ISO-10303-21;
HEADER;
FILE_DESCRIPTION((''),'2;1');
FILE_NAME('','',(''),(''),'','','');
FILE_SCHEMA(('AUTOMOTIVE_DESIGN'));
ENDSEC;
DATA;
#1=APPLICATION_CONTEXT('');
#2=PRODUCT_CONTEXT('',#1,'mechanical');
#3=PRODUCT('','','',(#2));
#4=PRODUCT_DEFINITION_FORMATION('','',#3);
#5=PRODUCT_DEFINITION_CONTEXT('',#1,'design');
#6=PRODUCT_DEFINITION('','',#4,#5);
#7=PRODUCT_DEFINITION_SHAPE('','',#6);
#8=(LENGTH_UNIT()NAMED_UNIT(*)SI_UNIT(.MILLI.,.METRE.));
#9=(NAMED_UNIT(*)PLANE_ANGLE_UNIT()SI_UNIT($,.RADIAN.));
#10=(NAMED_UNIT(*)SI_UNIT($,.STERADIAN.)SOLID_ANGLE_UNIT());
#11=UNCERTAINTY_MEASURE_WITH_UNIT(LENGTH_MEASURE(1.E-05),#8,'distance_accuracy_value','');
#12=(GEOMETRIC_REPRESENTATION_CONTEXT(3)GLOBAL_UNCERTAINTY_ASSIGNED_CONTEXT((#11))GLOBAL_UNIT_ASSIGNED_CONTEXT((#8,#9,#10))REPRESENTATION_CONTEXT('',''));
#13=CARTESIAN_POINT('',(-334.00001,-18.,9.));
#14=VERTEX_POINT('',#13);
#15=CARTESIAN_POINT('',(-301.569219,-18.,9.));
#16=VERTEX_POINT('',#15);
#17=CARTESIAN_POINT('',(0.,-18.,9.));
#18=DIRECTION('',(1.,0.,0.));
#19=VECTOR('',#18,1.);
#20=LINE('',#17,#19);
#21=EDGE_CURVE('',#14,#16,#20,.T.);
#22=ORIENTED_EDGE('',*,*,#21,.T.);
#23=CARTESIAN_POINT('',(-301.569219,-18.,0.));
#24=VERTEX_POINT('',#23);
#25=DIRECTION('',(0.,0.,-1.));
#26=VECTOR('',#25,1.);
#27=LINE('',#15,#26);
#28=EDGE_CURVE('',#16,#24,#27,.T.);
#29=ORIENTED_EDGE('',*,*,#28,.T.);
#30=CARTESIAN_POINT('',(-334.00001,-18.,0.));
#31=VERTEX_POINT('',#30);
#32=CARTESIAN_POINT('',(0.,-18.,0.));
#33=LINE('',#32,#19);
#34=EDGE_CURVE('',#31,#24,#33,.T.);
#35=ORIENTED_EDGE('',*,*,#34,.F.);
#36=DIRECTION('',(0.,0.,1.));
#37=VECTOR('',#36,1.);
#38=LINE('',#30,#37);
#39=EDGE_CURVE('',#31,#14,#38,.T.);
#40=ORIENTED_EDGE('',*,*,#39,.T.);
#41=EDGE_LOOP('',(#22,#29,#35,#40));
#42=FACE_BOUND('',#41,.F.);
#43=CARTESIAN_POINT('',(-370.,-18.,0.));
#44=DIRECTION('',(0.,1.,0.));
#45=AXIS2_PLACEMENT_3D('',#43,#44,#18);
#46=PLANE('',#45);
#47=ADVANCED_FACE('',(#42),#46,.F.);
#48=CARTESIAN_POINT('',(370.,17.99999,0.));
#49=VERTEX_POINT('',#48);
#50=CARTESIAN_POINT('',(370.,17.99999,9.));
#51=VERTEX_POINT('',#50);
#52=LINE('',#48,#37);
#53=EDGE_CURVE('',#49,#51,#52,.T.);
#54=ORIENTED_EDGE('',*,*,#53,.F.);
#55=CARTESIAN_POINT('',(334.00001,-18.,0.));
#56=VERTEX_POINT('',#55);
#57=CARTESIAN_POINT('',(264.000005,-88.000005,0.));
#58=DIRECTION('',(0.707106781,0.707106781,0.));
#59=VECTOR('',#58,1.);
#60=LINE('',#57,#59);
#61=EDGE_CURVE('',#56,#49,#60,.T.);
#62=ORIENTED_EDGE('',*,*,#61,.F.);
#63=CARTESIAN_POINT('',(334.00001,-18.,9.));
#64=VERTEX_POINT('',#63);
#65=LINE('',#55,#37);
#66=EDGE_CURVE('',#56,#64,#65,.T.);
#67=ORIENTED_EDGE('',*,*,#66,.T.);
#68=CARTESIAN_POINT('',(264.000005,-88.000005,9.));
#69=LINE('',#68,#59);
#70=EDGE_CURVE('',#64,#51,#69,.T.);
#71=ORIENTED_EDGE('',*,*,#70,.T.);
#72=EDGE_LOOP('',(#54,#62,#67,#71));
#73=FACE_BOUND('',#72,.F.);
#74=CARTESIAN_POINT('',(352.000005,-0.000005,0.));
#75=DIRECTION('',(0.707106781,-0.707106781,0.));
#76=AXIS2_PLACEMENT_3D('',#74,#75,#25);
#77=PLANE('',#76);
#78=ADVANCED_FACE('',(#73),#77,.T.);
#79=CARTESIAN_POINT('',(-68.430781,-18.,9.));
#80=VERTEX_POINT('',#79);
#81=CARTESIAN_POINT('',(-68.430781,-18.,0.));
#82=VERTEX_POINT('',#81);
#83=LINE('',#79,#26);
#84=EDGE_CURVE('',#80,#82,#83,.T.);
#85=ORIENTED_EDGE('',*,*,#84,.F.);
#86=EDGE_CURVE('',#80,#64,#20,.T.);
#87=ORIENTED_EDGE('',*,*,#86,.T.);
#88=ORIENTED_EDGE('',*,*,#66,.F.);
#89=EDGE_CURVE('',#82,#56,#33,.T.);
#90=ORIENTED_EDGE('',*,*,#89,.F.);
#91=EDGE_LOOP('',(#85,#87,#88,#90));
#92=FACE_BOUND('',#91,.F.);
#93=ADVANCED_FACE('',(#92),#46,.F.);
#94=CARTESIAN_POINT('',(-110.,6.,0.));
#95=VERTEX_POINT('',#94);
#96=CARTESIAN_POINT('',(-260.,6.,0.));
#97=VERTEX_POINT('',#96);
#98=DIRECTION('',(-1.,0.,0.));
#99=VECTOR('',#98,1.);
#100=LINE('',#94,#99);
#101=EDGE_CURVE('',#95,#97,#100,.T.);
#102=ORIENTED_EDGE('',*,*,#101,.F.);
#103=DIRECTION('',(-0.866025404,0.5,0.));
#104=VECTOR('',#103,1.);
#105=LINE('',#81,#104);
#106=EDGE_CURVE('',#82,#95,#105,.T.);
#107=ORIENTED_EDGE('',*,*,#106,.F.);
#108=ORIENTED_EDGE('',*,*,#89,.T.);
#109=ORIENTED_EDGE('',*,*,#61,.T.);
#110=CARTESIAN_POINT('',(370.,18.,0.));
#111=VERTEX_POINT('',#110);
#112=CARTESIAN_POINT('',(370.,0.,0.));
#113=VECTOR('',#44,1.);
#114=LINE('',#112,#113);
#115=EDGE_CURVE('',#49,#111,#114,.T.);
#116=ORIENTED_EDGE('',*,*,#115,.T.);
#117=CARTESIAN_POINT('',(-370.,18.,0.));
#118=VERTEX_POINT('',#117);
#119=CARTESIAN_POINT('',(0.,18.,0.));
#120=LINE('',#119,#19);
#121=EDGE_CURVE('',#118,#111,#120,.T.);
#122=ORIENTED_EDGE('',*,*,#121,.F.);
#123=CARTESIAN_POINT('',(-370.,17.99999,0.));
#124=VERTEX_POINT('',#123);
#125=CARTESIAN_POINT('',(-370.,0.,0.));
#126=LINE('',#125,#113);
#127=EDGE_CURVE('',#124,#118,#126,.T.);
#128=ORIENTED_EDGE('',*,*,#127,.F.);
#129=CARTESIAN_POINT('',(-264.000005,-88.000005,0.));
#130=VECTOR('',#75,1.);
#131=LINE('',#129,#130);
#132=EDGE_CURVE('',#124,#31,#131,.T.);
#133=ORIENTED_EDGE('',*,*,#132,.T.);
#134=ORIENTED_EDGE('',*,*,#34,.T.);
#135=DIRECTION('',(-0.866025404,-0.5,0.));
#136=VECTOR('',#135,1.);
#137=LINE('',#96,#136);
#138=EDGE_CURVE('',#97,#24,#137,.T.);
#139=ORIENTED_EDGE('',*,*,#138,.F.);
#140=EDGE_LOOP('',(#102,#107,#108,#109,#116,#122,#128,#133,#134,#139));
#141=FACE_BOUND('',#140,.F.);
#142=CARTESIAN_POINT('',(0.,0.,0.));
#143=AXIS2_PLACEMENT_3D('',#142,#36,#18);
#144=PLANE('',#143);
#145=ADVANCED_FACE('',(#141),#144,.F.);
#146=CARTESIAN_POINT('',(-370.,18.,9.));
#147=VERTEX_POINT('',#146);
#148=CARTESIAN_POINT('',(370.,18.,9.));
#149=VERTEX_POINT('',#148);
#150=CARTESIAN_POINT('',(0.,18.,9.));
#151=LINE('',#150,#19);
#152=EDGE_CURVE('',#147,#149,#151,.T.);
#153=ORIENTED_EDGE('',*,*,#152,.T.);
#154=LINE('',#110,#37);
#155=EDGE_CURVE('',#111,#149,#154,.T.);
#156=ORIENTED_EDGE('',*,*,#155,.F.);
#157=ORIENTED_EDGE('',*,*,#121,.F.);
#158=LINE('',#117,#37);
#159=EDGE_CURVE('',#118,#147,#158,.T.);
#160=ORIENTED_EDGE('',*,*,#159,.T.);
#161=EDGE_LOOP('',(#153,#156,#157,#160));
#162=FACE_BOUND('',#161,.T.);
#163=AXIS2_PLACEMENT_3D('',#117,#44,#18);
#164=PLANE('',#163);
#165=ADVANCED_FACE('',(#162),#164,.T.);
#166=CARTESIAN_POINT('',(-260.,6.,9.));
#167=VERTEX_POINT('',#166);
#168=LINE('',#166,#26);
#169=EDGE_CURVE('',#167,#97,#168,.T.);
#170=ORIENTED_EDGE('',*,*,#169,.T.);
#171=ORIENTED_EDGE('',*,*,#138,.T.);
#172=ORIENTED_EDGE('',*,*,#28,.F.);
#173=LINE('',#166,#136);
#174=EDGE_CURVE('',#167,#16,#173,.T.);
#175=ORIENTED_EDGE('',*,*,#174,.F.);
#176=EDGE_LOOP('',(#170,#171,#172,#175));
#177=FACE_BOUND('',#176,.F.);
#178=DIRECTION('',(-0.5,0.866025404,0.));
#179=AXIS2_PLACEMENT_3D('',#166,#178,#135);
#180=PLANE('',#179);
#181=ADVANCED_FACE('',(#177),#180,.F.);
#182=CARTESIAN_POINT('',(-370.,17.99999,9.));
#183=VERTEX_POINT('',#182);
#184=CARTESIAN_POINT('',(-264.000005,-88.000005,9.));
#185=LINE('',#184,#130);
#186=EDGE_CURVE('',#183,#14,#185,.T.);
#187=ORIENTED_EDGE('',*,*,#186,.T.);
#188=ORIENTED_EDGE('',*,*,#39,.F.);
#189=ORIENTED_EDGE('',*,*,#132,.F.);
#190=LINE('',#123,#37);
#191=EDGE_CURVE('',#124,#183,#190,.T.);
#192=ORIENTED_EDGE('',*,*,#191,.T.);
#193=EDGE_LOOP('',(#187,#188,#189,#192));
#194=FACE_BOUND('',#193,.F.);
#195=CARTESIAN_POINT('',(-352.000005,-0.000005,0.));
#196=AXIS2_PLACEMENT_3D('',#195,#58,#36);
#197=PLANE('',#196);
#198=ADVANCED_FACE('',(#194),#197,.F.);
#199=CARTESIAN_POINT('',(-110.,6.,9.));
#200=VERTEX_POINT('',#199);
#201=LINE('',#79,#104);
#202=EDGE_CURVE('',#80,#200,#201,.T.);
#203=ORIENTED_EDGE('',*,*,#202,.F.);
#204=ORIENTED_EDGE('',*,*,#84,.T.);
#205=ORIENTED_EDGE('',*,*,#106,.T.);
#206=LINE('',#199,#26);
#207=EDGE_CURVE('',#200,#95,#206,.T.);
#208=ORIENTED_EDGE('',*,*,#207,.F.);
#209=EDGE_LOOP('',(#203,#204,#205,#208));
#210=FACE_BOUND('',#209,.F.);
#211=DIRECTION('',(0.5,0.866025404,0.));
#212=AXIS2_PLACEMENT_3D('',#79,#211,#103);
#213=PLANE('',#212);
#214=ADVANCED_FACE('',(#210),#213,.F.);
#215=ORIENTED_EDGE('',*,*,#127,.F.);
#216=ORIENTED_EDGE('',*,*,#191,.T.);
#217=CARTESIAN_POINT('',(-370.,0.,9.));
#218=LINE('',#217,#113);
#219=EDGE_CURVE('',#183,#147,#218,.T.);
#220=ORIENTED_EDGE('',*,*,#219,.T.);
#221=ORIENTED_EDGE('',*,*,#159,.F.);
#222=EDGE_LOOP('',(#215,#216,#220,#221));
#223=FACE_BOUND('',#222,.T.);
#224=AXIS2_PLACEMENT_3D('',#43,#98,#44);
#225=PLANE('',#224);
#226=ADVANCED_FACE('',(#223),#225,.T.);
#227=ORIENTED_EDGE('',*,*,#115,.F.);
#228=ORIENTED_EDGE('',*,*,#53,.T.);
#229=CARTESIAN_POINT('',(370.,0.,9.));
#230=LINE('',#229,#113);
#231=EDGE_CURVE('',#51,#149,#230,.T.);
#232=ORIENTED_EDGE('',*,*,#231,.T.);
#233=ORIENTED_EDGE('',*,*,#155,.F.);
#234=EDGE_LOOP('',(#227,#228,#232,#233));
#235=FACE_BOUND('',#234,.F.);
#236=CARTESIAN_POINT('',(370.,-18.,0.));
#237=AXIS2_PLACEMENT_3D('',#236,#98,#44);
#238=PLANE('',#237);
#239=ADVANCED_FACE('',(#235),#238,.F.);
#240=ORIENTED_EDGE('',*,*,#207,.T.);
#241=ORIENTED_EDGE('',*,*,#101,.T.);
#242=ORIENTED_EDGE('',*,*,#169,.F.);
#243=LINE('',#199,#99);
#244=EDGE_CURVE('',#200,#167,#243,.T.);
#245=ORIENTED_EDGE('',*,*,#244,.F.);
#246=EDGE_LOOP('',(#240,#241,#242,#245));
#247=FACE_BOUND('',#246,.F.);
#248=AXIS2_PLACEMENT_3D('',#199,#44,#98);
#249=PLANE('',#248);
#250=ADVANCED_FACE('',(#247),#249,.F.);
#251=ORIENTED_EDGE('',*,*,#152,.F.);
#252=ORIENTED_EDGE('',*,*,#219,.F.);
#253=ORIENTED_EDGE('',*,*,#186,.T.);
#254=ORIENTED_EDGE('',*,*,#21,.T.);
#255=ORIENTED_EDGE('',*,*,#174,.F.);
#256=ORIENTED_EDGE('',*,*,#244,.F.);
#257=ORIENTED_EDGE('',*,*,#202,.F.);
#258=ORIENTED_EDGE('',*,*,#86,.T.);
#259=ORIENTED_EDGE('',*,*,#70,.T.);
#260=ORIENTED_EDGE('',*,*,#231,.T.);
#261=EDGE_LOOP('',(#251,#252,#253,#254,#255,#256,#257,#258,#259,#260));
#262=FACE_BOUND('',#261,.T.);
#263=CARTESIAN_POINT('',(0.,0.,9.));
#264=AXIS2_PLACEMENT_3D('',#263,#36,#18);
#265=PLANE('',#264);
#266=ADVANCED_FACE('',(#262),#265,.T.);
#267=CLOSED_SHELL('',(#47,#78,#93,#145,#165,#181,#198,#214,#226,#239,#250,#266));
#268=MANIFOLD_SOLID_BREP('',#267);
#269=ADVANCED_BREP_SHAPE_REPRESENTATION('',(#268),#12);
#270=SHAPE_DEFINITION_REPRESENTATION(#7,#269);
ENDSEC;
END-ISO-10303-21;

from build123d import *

# Parameters (mm, degrees)
F0_W     = 740
F0_H     = 36
F1_DEPTH = 9
F2_SIZE  = 35.99999
F4_DEPTH = 9


# Not quite as in the source:
# - a fillet or chamfer is up to 0.001 mm smaller than in the source, because OpenCascade refuses the exact size


with BuildPart() as f1:
    # F0 (on Top) → F1 (new body)
    with BuildSketch(Plane.XY):
        Rectangle(F0_W, F0_H)
    extrude(amount=F1_DEPTH)

    # F2 (size 36 in the source; OpenCascade refuses exactly that, so slightly less here)
    f2_edges = [f1.edges().sort_by_distance(p)[0] for p in [
        (-370, -18, 4.5),
        (370, -18, 4.5),
    ]]
    chamfer(f2_edges, length=F2_SIZE)

    # F3 (on face) → F4 (cut, through all)
    with BuildSketch(Plane.XY.offset(9)):
        Polygon((-301.5692193817, -18), (-68.4307806183, -18), (-110, 6), (-260, 6), align=None)
    extrude(amount=-F4_DEPTH, mode=Mode.SUBTRACT)


solid = f1.part
